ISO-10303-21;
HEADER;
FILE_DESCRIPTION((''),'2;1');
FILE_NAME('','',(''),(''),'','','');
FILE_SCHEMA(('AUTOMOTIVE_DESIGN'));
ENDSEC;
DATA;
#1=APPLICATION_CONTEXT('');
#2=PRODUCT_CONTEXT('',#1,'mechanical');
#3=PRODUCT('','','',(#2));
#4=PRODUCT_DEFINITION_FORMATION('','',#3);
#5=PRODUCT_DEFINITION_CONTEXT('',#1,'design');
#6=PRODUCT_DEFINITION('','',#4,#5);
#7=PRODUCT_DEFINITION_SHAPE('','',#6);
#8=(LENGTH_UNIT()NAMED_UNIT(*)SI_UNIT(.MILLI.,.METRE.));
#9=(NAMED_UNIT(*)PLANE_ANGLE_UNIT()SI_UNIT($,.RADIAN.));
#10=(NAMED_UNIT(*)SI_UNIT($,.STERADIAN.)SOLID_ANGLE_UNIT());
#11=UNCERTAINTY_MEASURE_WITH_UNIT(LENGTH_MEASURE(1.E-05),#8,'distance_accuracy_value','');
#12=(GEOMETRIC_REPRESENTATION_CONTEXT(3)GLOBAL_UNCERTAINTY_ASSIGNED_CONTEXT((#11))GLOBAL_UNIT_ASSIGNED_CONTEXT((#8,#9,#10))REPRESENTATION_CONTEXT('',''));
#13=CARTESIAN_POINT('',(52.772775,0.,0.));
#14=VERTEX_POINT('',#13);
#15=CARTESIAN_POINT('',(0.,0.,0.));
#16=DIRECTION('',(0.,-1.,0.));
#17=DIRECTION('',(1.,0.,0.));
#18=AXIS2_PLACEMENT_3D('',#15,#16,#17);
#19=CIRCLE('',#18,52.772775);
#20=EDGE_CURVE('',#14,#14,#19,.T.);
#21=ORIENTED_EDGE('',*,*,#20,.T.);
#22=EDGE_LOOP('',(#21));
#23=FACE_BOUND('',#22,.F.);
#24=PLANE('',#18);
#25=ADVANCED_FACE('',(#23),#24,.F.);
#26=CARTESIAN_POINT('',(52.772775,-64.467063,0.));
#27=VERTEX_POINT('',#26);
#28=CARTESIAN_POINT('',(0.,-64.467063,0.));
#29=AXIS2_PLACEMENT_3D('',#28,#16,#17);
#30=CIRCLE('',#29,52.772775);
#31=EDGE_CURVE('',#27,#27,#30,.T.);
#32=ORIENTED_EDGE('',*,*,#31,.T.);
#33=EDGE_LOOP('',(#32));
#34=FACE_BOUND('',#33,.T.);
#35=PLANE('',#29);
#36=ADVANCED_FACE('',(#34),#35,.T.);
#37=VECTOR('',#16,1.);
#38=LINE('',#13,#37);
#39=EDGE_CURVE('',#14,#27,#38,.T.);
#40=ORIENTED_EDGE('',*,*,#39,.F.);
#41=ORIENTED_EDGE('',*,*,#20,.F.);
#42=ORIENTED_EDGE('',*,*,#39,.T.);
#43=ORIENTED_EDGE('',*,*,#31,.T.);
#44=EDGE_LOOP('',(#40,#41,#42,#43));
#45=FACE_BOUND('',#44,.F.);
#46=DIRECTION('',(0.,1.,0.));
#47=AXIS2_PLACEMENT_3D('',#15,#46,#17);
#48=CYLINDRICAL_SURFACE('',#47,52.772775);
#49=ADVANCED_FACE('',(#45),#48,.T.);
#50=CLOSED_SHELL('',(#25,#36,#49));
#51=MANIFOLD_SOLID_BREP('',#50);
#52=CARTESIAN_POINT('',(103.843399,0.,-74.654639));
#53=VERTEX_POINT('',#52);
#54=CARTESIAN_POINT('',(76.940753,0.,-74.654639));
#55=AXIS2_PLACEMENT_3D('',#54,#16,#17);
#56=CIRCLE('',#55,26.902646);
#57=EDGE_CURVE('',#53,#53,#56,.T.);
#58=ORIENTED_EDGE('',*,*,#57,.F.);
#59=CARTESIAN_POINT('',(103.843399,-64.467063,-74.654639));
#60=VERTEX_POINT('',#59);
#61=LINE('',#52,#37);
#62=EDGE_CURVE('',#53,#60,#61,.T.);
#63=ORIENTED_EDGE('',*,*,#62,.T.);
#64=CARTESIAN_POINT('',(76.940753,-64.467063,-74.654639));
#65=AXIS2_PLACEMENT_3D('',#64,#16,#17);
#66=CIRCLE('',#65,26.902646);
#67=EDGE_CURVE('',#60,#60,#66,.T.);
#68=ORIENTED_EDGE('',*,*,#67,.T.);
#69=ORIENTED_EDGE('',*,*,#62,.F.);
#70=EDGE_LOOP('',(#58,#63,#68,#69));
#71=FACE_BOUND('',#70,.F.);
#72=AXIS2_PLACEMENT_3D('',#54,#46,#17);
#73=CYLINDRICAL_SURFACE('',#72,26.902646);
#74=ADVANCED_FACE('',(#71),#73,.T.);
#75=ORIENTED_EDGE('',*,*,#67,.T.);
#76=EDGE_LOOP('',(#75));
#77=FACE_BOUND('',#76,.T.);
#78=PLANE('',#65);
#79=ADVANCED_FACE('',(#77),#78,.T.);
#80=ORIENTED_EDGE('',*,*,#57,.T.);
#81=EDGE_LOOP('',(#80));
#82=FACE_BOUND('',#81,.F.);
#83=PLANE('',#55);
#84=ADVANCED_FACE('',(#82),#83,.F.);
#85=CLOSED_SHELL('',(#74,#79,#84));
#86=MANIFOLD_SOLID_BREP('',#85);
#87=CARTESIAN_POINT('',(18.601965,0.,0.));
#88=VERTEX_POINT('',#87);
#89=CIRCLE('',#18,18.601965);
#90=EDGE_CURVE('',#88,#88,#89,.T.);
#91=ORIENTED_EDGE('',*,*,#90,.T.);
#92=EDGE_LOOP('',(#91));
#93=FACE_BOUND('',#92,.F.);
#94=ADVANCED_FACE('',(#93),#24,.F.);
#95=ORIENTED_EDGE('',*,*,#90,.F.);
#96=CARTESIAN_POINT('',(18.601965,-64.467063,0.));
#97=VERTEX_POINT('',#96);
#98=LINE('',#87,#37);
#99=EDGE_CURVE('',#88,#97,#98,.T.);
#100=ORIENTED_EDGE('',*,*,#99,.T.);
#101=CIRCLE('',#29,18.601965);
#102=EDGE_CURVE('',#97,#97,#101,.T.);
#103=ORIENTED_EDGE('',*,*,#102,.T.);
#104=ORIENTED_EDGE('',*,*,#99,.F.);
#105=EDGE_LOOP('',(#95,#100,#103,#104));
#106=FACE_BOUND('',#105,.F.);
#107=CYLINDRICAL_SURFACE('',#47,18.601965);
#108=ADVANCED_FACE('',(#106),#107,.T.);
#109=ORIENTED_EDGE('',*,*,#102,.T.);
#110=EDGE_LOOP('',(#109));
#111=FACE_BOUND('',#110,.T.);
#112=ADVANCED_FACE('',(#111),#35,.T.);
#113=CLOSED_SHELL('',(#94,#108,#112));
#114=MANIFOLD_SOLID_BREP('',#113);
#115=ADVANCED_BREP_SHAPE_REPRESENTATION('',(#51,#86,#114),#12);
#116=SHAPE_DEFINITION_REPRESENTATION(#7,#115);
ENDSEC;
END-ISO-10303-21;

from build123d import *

# Parameters (mm, degrees)
F2_R     = 26.9026463435
F4_DEPTH = 64.4670631737
F1_R     = 18.6019651269
F0_R     = 52.7727745314


with BuildPart() as f4:
    # F2 (on Front) → F4 (new body)
    with BuildSketch(Plane.XZ):
        with Locations((76.9407525659, -74.6546387672)):
            Circle(F2_R)
    extrude(amount=F4_DEPTH)


with BuildPart() as f4b:
    # F1 (on face) → F4, piece 2 (new body)
    with BuildSketch(Plane.XZ):
        Circle(F1_R)
    extrude(amount=F4_DEPTH)


with BuildPart() as f4c:
    # F0 (on Front) → F4, piece 3 (new body)
    with BuildSketch(Plane.XZ):
        Circle(F0_R)
    extrude(amount=F4_DEPTH)


solid = Compound([f4.part, f4b.part, f4c.part])
